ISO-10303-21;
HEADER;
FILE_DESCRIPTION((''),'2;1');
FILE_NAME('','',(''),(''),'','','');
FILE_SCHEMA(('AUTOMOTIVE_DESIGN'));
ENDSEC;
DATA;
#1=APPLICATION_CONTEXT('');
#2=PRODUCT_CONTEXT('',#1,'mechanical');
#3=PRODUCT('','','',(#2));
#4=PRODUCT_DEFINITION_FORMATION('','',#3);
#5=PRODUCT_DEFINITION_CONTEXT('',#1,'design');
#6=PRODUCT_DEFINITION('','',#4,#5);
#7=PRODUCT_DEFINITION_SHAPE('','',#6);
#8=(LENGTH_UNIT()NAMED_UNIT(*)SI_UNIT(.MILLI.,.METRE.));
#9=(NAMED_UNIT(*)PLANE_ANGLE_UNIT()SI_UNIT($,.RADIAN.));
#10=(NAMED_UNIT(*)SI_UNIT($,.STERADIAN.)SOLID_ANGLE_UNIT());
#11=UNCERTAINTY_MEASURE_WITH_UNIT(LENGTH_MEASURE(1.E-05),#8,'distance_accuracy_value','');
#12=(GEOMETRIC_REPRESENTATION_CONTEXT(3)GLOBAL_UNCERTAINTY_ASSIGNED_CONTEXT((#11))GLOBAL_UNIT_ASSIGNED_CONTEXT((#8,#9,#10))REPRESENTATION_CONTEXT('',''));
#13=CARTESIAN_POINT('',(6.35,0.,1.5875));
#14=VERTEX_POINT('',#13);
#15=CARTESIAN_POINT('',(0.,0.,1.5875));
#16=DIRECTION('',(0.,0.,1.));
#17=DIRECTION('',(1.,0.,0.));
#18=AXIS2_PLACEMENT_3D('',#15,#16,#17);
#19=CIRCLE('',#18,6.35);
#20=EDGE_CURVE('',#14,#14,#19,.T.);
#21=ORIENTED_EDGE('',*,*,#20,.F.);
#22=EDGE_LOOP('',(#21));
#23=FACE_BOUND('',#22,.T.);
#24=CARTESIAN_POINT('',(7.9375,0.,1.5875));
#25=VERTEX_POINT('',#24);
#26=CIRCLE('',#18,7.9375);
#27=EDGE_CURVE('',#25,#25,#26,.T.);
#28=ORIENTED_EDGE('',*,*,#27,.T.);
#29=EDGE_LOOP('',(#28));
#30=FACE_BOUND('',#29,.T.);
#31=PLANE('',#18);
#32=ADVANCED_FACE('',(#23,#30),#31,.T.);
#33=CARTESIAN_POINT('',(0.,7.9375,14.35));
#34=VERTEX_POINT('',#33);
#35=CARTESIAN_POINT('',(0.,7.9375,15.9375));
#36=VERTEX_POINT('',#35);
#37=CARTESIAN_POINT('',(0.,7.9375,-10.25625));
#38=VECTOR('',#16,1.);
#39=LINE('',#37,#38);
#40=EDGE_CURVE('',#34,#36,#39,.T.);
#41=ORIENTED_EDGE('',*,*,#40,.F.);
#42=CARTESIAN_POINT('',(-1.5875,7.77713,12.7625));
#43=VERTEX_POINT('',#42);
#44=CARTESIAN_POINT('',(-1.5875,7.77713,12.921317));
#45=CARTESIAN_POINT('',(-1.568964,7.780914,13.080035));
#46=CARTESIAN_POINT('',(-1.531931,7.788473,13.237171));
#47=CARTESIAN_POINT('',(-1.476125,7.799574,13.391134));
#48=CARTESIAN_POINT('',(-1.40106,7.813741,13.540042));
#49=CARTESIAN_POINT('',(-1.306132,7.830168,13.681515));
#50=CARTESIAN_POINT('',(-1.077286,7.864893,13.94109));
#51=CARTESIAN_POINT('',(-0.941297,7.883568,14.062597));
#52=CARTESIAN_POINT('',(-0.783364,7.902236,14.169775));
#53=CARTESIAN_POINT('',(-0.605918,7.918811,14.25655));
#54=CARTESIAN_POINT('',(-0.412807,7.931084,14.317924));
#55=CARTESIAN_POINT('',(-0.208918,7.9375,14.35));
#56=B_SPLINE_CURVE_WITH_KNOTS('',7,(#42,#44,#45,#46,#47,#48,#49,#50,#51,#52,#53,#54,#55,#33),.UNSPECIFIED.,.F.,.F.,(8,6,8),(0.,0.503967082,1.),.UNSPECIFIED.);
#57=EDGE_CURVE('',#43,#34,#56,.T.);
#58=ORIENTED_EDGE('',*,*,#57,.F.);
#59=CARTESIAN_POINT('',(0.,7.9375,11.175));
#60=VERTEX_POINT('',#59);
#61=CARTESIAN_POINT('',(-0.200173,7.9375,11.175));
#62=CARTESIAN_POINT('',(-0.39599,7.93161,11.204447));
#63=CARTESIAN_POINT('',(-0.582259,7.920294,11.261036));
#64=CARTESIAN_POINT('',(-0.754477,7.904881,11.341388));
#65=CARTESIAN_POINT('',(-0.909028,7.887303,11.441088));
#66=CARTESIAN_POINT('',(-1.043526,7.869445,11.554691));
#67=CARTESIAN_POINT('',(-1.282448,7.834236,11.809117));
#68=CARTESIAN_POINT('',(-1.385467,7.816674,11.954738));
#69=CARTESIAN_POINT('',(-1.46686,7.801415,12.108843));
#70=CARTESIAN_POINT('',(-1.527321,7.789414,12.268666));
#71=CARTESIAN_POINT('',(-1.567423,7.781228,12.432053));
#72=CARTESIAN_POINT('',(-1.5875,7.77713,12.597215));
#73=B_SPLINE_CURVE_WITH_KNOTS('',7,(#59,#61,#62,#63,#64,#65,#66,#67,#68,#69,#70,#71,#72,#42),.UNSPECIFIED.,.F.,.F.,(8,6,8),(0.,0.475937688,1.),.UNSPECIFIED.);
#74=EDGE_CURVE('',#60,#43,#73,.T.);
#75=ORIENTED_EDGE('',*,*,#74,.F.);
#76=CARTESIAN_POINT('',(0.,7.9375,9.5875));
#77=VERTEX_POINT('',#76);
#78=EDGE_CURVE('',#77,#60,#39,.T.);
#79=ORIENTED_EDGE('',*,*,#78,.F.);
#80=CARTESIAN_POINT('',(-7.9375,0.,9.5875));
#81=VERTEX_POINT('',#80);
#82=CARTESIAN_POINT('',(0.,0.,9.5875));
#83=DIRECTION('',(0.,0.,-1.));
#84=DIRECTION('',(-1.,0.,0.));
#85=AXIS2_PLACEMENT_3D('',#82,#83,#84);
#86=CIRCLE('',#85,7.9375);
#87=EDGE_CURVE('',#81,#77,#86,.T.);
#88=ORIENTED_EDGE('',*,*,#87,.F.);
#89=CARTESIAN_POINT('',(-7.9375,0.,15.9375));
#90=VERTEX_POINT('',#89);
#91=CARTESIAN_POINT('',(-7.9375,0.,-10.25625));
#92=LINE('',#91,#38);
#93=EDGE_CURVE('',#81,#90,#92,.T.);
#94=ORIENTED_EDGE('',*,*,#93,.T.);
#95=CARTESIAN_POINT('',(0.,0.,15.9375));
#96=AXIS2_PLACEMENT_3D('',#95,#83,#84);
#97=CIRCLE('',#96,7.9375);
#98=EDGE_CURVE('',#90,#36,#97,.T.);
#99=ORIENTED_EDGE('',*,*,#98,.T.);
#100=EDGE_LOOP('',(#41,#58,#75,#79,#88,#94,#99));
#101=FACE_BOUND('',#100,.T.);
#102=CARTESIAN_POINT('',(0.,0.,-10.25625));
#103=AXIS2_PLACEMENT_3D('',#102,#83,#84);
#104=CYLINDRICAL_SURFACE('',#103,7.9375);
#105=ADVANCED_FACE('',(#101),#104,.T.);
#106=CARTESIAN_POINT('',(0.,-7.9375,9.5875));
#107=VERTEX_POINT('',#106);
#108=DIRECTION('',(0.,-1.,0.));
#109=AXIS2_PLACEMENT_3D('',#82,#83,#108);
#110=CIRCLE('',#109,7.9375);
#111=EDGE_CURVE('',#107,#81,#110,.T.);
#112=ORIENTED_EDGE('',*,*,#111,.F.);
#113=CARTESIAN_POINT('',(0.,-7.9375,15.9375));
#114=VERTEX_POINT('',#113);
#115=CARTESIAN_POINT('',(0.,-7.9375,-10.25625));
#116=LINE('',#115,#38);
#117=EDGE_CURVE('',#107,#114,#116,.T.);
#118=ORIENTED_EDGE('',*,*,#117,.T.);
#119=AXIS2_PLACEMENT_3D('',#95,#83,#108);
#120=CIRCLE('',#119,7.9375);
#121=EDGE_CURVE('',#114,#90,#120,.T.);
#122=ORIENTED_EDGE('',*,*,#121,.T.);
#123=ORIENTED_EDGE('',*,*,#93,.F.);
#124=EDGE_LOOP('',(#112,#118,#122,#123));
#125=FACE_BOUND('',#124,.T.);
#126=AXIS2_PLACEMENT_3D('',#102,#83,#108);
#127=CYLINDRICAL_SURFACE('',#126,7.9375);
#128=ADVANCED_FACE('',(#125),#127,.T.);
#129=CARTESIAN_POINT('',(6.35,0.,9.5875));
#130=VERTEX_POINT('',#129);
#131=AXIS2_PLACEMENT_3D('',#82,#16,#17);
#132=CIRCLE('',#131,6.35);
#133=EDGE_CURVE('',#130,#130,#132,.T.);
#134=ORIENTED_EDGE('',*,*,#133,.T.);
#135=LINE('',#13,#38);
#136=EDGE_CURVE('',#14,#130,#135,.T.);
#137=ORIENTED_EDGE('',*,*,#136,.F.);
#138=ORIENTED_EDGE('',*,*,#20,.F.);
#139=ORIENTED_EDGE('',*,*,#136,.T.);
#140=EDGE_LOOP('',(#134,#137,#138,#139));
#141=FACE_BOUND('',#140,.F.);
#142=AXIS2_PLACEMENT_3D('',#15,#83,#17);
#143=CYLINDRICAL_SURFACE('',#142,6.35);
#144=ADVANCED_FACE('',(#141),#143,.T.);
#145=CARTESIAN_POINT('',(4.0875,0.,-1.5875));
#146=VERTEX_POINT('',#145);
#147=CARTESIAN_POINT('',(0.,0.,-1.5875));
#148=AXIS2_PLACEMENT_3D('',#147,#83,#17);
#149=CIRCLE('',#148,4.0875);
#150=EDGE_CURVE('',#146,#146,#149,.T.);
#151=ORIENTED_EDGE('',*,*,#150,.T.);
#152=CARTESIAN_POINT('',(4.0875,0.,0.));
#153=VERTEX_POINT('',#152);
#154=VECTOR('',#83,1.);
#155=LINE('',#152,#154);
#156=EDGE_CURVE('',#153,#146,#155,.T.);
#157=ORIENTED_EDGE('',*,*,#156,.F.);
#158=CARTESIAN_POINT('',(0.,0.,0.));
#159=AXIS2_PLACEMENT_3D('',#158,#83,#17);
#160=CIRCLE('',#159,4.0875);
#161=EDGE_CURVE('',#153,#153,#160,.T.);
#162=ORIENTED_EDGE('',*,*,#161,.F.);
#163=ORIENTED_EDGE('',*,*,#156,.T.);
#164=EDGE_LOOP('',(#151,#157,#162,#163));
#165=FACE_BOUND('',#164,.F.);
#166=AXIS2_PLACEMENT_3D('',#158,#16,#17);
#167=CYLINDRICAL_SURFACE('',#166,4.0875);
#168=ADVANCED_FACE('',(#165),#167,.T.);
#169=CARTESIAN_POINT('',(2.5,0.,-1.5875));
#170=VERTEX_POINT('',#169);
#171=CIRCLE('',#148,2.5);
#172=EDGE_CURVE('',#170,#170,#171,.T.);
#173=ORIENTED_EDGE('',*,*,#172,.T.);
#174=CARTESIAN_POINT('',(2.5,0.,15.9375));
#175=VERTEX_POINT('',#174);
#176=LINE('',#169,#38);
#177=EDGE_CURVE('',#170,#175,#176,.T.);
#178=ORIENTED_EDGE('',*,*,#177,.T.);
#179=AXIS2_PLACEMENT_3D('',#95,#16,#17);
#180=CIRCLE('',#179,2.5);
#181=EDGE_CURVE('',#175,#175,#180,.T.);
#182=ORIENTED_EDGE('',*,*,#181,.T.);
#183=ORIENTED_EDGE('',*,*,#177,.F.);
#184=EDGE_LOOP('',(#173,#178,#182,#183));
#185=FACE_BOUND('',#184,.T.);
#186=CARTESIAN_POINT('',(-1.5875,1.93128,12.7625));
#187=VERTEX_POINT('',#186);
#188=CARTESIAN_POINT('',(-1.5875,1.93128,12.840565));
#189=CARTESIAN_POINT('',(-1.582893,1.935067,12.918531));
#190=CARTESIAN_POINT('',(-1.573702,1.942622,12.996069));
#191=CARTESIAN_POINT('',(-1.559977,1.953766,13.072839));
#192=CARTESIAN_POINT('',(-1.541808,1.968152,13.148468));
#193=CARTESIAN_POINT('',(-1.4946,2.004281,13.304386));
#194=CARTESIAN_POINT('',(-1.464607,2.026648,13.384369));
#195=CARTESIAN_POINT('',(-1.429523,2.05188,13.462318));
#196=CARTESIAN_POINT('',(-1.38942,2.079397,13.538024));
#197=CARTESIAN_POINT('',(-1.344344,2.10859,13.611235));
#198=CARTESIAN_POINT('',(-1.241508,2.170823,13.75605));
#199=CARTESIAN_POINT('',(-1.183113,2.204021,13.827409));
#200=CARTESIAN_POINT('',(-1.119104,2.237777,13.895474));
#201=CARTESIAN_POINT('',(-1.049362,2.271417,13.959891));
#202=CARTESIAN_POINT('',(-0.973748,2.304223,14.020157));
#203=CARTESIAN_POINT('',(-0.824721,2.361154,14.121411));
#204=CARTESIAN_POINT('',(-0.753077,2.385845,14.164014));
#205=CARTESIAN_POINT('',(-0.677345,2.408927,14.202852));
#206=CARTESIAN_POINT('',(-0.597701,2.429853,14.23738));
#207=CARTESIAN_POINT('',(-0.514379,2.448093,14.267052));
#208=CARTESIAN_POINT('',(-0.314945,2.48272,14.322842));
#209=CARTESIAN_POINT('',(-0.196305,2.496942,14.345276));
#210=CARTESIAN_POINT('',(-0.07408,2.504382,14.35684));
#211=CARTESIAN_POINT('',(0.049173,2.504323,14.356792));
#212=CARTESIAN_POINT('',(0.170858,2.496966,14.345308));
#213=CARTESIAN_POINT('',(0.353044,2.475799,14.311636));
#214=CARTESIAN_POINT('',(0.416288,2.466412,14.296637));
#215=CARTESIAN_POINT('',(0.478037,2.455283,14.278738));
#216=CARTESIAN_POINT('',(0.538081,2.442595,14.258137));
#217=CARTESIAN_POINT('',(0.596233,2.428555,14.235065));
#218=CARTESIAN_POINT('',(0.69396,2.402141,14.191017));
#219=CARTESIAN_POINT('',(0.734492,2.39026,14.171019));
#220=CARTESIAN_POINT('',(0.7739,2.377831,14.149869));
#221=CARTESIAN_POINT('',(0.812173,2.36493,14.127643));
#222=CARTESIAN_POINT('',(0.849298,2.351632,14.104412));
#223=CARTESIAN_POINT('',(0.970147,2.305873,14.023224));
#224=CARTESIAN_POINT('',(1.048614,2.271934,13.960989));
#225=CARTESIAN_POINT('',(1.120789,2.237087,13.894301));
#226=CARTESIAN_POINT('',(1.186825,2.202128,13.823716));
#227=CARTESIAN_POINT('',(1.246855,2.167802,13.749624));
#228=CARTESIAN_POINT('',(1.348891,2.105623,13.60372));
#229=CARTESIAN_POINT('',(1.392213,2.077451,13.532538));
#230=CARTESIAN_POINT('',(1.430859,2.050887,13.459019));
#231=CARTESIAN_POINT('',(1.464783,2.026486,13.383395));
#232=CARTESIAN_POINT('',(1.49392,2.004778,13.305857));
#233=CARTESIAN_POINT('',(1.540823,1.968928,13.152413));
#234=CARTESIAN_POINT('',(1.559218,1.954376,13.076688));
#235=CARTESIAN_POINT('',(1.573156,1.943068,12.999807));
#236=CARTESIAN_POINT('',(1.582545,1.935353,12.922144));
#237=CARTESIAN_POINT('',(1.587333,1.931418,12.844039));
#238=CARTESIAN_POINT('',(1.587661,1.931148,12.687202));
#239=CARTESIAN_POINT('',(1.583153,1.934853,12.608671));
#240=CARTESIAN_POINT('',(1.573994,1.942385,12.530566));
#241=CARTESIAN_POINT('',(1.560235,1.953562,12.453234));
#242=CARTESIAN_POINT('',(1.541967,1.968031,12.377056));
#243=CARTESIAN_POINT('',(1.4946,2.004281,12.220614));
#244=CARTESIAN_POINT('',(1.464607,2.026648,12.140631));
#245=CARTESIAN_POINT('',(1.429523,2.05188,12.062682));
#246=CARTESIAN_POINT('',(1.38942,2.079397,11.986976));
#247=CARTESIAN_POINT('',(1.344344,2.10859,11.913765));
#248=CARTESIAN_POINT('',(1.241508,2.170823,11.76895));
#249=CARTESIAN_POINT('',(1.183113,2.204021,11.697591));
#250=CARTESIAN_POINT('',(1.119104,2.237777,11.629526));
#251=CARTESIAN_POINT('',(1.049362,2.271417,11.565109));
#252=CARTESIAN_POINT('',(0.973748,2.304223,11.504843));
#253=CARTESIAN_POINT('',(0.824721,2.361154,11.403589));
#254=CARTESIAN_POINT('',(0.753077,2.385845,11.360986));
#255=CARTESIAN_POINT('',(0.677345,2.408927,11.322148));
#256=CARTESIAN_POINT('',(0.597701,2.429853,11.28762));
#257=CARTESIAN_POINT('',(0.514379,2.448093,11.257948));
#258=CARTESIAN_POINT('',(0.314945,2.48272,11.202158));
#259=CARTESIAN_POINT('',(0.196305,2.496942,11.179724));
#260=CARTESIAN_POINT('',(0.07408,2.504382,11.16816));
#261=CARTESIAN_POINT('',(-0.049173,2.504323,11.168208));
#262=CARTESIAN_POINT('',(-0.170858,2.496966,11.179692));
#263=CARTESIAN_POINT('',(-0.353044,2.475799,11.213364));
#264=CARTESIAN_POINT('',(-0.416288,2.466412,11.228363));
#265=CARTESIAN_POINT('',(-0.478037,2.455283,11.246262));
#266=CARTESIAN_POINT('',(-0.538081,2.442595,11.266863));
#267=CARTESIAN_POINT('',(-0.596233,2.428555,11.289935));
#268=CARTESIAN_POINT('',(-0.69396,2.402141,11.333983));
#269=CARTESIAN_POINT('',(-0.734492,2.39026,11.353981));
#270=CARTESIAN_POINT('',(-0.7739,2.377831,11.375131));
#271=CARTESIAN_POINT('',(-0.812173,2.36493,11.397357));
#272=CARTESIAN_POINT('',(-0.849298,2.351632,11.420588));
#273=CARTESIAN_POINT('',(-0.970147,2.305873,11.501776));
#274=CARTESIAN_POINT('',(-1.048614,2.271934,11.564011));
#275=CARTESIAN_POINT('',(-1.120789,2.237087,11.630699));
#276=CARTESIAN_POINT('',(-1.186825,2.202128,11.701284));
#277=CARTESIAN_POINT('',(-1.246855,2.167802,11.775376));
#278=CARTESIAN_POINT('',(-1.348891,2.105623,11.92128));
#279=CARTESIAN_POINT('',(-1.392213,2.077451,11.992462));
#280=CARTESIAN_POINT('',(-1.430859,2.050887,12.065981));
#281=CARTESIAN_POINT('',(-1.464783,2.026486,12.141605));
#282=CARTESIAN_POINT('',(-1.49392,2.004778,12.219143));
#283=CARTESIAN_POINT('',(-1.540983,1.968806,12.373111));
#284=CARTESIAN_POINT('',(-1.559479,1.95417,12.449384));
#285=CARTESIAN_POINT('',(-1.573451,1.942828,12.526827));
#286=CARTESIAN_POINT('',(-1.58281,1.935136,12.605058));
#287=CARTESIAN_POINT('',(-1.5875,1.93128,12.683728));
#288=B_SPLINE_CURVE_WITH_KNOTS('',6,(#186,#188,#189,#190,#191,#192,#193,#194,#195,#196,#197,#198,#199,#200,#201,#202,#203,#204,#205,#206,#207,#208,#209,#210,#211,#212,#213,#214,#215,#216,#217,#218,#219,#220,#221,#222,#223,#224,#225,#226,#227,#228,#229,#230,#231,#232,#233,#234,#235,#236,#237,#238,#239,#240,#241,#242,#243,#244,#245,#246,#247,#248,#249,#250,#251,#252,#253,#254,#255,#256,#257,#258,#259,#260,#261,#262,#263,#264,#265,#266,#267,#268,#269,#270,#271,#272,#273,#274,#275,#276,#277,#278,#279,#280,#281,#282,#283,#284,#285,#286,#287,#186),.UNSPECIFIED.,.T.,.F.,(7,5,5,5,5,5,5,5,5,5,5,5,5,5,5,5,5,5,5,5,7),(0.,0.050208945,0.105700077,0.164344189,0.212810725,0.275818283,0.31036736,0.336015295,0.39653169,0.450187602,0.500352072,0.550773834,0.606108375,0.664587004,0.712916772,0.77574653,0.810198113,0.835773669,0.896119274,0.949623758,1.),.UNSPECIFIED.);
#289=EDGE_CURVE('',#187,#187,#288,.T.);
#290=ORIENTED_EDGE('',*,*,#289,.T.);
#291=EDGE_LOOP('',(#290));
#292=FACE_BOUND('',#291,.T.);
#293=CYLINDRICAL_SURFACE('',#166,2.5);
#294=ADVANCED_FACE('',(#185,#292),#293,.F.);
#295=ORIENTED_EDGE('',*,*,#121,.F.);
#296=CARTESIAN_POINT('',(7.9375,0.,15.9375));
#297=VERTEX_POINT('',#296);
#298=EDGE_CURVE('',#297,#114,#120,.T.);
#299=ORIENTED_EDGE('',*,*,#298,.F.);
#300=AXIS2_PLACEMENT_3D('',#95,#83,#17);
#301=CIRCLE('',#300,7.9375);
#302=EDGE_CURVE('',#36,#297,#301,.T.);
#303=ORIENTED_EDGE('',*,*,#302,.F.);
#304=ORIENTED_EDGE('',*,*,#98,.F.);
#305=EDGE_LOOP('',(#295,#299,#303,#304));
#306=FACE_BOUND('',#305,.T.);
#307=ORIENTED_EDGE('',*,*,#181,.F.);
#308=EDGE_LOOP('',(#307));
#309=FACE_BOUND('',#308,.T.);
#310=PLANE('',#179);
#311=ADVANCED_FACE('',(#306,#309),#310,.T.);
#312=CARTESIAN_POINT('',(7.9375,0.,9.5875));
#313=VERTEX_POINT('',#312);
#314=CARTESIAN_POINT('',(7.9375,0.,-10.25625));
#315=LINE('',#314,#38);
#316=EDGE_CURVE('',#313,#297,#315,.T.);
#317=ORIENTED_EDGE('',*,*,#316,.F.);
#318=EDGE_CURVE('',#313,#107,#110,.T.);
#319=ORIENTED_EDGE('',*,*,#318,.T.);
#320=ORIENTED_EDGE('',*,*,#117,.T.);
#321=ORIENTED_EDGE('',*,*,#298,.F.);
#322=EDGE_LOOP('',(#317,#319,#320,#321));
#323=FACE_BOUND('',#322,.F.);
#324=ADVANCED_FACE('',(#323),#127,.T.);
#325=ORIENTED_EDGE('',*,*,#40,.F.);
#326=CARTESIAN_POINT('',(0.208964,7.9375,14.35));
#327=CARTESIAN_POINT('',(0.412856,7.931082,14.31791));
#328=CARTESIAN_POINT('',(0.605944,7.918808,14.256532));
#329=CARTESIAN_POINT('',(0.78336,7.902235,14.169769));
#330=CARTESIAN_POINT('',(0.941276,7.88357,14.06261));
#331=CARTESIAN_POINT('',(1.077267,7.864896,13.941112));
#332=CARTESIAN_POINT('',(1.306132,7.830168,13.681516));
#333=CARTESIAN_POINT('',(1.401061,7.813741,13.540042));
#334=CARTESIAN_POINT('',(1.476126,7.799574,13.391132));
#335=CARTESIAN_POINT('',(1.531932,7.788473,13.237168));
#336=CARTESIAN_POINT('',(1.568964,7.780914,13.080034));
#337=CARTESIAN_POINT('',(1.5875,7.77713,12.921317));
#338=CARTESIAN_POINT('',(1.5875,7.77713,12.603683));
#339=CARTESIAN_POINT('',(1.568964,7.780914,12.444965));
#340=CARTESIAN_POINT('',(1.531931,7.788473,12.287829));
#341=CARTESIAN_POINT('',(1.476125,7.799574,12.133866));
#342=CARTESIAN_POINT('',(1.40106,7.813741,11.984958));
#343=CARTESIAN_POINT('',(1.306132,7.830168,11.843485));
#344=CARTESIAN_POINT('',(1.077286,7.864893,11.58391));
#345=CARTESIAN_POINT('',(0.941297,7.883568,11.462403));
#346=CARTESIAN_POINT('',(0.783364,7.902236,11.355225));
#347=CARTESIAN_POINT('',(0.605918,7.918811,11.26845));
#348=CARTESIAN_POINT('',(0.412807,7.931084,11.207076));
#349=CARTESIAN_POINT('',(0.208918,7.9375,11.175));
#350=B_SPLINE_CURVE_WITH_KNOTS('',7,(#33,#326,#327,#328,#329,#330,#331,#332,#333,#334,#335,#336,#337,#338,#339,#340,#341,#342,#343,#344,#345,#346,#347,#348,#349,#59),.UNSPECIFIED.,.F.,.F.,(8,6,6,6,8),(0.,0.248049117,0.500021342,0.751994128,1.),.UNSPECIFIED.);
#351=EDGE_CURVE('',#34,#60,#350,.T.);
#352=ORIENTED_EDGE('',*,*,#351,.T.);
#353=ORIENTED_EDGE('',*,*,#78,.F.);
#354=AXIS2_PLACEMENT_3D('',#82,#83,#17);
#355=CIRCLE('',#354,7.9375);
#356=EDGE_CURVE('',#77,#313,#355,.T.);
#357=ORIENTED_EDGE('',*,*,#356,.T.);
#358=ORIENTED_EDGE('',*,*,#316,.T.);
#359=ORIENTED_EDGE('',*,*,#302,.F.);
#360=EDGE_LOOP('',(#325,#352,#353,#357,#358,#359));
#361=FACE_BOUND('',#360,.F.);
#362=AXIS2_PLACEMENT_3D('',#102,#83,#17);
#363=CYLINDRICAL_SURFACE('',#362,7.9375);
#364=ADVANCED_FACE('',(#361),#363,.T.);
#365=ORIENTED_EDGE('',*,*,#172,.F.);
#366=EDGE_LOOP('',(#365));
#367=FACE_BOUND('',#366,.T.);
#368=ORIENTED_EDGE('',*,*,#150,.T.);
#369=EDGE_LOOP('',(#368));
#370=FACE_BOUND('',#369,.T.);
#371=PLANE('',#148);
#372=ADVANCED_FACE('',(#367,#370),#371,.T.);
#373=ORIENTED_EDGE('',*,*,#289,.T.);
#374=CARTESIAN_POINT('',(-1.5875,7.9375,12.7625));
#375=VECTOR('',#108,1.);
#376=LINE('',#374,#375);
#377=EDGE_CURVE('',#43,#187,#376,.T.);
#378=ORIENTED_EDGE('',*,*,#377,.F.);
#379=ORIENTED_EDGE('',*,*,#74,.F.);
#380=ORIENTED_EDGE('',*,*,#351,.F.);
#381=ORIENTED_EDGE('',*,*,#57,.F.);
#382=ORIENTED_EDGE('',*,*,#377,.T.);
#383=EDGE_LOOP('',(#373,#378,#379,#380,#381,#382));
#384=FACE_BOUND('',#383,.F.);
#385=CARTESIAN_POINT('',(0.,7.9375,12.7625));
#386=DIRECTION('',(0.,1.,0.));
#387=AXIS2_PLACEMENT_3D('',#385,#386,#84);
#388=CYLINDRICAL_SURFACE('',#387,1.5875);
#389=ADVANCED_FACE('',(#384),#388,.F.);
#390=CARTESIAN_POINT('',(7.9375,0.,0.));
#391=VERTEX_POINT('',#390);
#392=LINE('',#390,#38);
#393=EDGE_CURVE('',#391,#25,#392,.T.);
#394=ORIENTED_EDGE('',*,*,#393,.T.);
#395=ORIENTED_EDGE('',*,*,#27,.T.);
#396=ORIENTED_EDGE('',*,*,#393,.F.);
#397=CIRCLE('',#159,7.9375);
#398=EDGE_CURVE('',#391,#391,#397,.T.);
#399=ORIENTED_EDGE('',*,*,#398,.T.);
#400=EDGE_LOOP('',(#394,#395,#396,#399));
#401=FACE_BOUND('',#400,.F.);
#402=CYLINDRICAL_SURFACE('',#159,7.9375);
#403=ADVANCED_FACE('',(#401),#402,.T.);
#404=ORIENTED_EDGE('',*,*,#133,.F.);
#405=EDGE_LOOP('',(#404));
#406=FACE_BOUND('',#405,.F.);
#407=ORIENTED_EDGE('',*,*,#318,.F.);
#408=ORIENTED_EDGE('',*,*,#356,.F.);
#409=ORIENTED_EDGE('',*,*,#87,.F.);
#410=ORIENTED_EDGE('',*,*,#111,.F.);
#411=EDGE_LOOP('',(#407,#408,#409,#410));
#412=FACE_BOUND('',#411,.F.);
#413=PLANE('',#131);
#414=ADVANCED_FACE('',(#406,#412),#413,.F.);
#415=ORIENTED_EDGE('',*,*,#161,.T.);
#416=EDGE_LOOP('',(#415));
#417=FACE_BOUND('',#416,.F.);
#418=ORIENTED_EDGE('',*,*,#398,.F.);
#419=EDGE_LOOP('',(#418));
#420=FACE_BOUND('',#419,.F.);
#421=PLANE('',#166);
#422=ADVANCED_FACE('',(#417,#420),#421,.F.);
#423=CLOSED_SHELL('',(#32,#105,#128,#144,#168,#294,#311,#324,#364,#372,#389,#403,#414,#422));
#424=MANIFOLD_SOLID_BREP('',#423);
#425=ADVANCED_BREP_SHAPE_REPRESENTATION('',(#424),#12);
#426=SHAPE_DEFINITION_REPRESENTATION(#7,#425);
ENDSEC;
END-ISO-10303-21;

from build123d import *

# Parameters (mm, degrees)
F0_R         = 7.9375
F1_DEPTH     = 1.5875
F2_R         = 6.35
F3_DEPTH     = 8
F4_W         = 15.875
F4_H         = 15.875
F5_DEPTH     = 6.35
F6_R         = 2.5
F7_DEPTH     = 15.9375
F8_R         = 1.5875
F9_REACH     = 20.3661280605
F10_T1_DEPTH = 46.0375
F11_R        = 4.0875
F11_R_2      = 2.5
F12_DEPTH    = 1.5875


# Not quite as in the source:
# - a fillet or chamfer that OpenCascade refuses, or shapes differently, is made with other operations: its cross-section is extruded or revolved along the edge and cut away or added


with BuildPart() as f1:
    # F0 (on Top) → F1 (new body)
    with BuildSketch(Plane.XY):
        Circle(F0_R)
    extrude(amount=F1_DEPTH)

    # F2 (on face) → F3 (join)
    with BuildSketch(Plane.XY.offset(1.5875)):
        Circle(F2_R)
    extrude(amount=F3_DEPTH)

    # F4 (on face) → F5 (join)
    with BuildSketch(Plane.XY.offset(9.5875)):
        Rectangle(F4_W, F4_H)
    extrude(amount=F5_DEPTH)

    # F6 (on face) → F7 (cut, through all)
    with BuildSketch(Plane.XY.offset(15.9375)):
        Circle(F6_R)
    extrude(amount=-F7_DEPTH, mode=Mode.SUBTRACT)

    f9_end = f1.faces().sort_by_distance((-2.5, 0, 7.96875))[0]
    # F8 (on face) → F9 (cut, up to a face of the model that its end follows)
    with BuildSketch(Plane(origin=(0, 7.9375, 0), x_dir=(-1, 0, 0), z_dir=(0, 1, 0))):
        with Locations((0, 12.7625)):
            Circle(F8_R)
    f9_long = extrude(amount=-F9_REACH, mode=Mode.PRIVATE)
    add(split(f9_long, bisect_by=f9_end, keep=Keep.ALL, mode=Mode.PRIVATE).solids().sort_by_distance((0, 7.9375, 12.7625))[0], mode=Mode.SUBTRACT)

    # F10: fillet of radius 7.9375 on 4 edges, made by hand

    # F10_s2 → F10_t1 (cut)
    with BuildSketch(Plane.XY.offset(-10.25625)):
        with BuildLine():
            ThreePointArc((-7.9375, 0), (-5.6126600757, 5.6126600757), (0, 7.9375))
            Line((0, 7.9375), (-7.9375, 7.9375))
            Line((-7.9375, 7.9375), (-7.9375, 0))
        make_face()
        with BuildLine():
            ThreePointArc((0, -7.9375), (-5.6126600757, -5.6126600757), (-7.9375, 0))
            Line((-7.9375, 0), (-7.9375, -7.9375))
            Line((-7.9375, -7.9375), (0, -7.9375))
        make_face()
        with BuildLine():
            ThreePointArc((7.9375, 0), (5.6126600757, 5.6126600757), (0, 7.9375))
            Line((0, 7.9375), (7.9375, 7.9375))
            Line((7.9375, 7.9375), (7.9375, 0))
        make_face()
        with BuildLine():
            ThreePointArc((0, -7.9375), (5.6126600757, -5.6126600757), (7.9375, 0))
            Line((7.9375, 0), (7.9375, -7.9375))
            Line((7.9375, -7.9375), (0, -7.9375))
        make_face()
    extrude(amount=F10_T1_DEPTH, mode=Mode.SUBTRACT)

    # F11 (on face) → F12 (join)
    with BuildSketch(Plane(origin=(0, 0, 0), x_dir=(1, 0, 0), z_dir=(0, 0, -1))):
        Circle(F11_R)
        Circle(F11_R_2, mode=Mode.SUBTRACT)
    extrude(amount=F12_DEPTH)


solid = f1.part
